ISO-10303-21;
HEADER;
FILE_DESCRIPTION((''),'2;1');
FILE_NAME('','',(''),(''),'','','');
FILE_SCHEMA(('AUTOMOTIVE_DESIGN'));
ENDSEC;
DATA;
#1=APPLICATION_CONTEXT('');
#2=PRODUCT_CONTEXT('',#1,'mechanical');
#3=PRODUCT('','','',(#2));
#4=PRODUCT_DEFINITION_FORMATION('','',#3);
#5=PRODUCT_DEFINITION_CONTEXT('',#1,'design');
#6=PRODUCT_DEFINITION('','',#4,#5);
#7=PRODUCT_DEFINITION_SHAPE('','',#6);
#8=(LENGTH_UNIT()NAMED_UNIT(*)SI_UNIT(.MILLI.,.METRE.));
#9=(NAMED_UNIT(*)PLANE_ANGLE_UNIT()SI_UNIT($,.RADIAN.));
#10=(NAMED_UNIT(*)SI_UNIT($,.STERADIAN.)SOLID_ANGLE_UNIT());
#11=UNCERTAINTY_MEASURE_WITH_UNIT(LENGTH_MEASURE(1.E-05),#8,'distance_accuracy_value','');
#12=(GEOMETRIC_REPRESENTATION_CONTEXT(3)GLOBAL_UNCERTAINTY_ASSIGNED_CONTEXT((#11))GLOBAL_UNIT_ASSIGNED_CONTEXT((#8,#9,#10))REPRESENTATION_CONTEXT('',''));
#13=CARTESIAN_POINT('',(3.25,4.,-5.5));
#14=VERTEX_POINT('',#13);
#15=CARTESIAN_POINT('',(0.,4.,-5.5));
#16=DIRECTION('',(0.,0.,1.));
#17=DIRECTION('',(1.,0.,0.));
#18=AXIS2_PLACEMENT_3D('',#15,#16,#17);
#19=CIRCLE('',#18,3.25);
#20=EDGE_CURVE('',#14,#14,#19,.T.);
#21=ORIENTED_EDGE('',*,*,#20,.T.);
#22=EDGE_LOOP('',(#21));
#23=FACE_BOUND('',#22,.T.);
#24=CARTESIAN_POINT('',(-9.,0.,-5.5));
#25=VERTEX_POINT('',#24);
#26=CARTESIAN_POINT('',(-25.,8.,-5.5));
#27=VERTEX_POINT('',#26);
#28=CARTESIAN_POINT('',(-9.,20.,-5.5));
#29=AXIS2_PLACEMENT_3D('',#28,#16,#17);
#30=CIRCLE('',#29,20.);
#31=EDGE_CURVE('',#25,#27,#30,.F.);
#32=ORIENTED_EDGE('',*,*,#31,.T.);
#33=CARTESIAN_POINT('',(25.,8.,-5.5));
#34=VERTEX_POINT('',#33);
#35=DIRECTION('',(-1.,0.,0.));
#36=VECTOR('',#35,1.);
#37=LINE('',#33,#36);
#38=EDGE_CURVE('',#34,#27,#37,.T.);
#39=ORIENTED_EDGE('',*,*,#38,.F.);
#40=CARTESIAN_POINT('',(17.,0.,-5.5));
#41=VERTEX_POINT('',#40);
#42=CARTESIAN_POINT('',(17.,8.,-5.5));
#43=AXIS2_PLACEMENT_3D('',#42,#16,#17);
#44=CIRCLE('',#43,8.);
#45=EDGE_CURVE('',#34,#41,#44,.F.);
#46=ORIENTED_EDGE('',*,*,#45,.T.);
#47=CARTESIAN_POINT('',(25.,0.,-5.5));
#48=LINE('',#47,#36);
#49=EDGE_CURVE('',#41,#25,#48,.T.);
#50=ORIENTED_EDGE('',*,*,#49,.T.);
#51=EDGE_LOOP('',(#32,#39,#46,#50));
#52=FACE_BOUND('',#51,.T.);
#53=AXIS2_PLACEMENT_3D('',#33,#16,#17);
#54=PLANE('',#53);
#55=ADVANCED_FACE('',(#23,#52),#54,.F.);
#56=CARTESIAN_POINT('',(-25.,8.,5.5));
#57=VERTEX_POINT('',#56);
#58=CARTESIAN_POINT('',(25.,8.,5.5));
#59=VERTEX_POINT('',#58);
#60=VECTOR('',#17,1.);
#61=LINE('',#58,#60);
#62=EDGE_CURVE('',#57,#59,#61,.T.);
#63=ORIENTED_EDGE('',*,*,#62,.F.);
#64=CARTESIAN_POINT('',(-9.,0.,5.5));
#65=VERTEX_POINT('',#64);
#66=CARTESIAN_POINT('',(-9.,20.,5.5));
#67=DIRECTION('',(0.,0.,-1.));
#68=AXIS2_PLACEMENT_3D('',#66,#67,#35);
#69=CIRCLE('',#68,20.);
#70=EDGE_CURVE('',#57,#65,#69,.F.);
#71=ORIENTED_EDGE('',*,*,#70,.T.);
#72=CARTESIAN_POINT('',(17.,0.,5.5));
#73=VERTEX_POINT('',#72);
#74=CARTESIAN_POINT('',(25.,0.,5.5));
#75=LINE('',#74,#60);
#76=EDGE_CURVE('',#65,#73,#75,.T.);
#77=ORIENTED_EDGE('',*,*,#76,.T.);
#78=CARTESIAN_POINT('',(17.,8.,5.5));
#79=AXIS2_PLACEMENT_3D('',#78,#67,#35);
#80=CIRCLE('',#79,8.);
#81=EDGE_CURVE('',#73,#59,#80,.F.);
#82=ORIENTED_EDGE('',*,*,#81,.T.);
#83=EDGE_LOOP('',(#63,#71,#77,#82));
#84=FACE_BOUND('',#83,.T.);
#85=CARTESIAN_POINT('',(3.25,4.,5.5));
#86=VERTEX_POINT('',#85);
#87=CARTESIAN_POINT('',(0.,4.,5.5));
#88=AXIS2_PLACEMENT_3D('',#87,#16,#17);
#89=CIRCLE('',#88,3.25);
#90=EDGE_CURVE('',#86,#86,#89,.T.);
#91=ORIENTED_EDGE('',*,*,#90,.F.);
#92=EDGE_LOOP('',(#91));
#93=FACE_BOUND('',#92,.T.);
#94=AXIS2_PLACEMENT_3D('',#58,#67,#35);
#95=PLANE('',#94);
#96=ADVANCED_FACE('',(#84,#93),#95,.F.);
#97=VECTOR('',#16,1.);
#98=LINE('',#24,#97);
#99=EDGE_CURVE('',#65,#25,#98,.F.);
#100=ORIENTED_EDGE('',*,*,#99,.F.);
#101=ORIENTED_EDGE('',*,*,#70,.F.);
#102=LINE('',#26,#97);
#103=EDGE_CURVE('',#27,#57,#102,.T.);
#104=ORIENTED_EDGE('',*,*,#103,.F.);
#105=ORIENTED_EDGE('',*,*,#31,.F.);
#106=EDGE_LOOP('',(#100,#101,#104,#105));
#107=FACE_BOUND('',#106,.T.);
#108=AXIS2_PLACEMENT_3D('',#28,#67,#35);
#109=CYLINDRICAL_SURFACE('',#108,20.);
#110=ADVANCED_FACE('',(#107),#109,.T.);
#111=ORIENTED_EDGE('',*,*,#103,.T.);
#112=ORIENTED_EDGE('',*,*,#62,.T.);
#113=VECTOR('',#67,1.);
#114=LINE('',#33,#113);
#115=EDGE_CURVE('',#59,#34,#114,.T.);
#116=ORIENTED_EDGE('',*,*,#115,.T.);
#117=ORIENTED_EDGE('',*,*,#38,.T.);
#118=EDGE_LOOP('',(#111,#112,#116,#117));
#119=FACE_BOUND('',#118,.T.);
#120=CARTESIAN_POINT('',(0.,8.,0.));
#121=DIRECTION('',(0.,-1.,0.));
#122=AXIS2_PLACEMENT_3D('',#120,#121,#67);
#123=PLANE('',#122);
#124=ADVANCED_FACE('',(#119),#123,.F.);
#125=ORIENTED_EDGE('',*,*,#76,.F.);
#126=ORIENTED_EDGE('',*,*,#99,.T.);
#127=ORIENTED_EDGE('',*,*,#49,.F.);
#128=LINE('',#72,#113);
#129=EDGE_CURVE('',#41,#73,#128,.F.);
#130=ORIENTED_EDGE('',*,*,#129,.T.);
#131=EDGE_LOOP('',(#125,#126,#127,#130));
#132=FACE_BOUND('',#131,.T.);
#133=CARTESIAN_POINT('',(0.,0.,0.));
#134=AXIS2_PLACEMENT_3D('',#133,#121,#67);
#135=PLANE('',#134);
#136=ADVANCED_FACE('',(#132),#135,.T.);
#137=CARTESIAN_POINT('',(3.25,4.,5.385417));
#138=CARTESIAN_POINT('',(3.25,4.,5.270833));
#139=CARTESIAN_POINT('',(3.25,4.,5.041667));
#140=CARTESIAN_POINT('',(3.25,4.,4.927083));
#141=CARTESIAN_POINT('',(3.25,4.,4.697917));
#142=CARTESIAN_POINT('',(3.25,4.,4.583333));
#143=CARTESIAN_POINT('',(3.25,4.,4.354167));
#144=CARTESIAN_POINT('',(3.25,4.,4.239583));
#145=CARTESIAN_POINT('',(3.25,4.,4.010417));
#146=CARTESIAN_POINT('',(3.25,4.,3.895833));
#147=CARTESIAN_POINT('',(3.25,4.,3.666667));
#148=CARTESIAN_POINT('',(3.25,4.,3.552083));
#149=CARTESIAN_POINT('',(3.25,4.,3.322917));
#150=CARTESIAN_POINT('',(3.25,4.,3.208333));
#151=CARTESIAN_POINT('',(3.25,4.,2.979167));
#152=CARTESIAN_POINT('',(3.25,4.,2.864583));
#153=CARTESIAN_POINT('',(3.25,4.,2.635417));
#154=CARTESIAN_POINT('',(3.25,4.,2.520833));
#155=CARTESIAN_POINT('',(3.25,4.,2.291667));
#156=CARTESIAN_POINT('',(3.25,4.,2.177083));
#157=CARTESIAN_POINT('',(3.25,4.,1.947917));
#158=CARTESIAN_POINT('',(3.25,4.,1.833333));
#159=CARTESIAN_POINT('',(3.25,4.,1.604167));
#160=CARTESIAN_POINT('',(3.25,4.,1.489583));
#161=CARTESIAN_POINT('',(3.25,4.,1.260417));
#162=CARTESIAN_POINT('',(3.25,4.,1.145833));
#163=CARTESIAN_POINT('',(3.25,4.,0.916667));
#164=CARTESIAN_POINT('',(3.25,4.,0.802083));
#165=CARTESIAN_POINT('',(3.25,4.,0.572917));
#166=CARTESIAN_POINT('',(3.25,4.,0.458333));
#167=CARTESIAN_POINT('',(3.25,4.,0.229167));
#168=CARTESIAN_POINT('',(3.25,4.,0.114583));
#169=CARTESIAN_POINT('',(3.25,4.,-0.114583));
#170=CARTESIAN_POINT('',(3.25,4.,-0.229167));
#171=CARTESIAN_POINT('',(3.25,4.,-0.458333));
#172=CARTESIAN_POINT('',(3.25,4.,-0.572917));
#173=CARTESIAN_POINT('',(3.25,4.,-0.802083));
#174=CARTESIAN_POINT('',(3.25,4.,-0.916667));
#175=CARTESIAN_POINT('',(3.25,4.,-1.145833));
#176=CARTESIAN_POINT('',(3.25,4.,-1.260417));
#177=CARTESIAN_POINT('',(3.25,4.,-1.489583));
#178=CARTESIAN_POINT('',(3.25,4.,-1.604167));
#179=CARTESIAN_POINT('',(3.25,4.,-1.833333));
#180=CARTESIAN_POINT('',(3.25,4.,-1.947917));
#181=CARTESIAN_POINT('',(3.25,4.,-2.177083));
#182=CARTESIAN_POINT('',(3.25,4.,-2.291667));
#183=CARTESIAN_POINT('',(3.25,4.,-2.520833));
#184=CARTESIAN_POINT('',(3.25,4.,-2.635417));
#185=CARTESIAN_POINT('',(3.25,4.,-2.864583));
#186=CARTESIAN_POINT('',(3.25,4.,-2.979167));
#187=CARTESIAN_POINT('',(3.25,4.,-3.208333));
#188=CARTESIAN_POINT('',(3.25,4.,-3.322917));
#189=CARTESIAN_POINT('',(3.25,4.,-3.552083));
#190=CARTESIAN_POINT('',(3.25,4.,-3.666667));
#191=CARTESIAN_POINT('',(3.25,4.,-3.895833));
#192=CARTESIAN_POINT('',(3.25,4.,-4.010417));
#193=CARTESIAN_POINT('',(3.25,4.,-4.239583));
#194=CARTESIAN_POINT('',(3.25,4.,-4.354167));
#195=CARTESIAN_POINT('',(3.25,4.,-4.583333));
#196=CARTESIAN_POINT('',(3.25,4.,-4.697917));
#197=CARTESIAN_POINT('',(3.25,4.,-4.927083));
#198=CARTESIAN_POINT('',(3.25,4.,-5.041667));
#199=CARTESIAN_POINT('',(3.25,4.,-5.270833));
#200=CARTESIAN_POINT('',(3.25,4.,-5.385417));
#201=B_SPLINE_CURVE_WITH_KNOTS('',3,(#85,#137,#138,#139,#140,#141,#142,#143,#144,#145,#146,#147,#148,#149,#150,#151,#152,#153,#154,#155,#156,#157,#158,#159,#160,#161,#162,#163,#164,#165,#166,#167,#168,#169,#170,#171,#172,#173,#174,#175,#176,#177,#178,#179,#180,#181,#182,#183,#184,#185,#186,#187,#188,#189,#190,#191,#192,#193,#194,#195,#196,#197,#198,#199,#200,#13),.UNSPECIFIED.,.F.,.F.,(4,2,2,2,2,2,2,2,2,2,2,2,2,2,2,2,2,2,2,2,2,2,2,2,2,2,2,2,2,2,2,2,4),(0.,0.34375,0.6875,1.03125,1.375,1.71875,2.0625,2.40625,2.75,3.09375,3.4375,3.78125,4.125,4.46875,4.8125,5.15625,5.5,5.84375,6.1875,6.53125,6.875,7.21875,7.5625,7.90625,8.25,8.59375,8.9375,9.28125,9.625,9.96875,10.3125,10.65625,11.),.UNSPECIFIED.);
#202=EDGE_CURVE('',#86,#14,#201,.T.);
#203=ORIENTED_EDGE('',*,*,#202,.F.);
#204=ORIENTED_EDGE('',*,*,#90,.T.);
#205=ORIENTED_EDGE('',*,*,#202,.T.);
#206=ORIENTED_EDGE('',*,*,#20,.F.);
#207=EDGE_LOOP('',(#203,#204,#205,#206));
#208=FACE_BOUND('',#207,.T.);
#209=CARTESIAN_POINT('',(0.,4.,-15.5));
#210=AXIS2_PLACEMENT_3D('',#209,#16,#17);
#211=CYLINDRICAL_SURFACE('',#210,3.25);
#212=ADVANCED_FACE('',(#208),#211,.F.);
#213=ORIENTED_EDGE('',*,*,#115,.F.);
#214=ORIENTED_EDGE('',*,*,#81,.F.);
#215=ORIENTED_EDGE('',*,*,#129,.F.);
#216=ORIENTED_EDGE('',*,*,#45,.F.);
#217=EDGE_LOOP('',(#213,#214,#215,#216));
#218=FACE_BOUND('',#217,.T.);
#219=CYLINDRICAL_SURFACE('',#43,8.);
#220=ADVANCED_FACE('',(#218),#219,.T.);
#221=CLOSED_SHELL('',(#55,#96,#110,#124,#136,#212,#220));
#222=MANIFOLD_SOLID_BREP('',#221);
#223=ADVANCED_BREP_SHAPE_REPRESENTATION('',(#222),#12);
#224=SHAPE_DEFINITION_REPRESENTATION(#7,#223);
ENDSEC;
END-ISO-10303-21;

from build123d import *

# Parameters (mm, degrees)
SKETCH1_W           = 50
SKETCH1_H           = 11
BOSS_EXTRUDE1_DEPTH = 8
FILLET1_R           = 20
FILLET2_R           = 8
SKETCH2_R           = 3.25
CUT_EXTRUDE1_DEPTH  = 21


# Some blends are built 0.0001 mm under size
with BuildPart() as part:
    # Sketch1 → Boss-Extrude1 (new body)
    with BuildSketch(Plane(origin=(0, 0, 0), x_dir=(1, 0, 0), z_dir=(0, 1, 0))):
        Rectangle(SKETCH1_W, SKETCH1_H)
    extrude(amount=BOSS_EXTRUDE1_DEPTH)

    # Fillet1
    # the kernel refuses this fillet: 20 mm, written as the material it takes off along each edge
    with BuildSketch(Plane(origin=(-25, 0, -45.5), x_dir=(0, 1, 0), z_dir=(0, 0, 1))) as fillet1_piece_1:
        with BuildLine():
            CenterArc((20, -16), FILLET1_R, 126.869897646, 53.130102354)
            Line((0, -16), (-0.4, -16))
            Line((-0.4, -16), (-0.4, 0))
            Line((-0.4, 0), (0, 0.4))
            ThreePointArc((0, 0.4), (4, 0.4), (7.76, 0.32))
            Line((7.76, 0.32), (8, 0))
        make_face()
    extrude(amount=91, mode=Mode.SUBTRACT)

    # Fillet2
    fillet2_edges = [part.edges().sort_by_distance(p)[0] for p in [
        (25, 0, 0),
    ]]
    fillet(fillet2_edges, radius=FILLET2_R - 0.0001)  # a hair under: the kernel refuses the full size

    # Sketch2 → Cut-Extrude1 (cut)
    with BuildSketch(Plane.XY.offset(5.5)):
        with Locations((0, 4)):
            Circle(SKETCH2_R)
    extrude(amount=-CUT_EXTRUDE1_DEPTH, mode=Mode.SUBTRACT)


solid = part.part
